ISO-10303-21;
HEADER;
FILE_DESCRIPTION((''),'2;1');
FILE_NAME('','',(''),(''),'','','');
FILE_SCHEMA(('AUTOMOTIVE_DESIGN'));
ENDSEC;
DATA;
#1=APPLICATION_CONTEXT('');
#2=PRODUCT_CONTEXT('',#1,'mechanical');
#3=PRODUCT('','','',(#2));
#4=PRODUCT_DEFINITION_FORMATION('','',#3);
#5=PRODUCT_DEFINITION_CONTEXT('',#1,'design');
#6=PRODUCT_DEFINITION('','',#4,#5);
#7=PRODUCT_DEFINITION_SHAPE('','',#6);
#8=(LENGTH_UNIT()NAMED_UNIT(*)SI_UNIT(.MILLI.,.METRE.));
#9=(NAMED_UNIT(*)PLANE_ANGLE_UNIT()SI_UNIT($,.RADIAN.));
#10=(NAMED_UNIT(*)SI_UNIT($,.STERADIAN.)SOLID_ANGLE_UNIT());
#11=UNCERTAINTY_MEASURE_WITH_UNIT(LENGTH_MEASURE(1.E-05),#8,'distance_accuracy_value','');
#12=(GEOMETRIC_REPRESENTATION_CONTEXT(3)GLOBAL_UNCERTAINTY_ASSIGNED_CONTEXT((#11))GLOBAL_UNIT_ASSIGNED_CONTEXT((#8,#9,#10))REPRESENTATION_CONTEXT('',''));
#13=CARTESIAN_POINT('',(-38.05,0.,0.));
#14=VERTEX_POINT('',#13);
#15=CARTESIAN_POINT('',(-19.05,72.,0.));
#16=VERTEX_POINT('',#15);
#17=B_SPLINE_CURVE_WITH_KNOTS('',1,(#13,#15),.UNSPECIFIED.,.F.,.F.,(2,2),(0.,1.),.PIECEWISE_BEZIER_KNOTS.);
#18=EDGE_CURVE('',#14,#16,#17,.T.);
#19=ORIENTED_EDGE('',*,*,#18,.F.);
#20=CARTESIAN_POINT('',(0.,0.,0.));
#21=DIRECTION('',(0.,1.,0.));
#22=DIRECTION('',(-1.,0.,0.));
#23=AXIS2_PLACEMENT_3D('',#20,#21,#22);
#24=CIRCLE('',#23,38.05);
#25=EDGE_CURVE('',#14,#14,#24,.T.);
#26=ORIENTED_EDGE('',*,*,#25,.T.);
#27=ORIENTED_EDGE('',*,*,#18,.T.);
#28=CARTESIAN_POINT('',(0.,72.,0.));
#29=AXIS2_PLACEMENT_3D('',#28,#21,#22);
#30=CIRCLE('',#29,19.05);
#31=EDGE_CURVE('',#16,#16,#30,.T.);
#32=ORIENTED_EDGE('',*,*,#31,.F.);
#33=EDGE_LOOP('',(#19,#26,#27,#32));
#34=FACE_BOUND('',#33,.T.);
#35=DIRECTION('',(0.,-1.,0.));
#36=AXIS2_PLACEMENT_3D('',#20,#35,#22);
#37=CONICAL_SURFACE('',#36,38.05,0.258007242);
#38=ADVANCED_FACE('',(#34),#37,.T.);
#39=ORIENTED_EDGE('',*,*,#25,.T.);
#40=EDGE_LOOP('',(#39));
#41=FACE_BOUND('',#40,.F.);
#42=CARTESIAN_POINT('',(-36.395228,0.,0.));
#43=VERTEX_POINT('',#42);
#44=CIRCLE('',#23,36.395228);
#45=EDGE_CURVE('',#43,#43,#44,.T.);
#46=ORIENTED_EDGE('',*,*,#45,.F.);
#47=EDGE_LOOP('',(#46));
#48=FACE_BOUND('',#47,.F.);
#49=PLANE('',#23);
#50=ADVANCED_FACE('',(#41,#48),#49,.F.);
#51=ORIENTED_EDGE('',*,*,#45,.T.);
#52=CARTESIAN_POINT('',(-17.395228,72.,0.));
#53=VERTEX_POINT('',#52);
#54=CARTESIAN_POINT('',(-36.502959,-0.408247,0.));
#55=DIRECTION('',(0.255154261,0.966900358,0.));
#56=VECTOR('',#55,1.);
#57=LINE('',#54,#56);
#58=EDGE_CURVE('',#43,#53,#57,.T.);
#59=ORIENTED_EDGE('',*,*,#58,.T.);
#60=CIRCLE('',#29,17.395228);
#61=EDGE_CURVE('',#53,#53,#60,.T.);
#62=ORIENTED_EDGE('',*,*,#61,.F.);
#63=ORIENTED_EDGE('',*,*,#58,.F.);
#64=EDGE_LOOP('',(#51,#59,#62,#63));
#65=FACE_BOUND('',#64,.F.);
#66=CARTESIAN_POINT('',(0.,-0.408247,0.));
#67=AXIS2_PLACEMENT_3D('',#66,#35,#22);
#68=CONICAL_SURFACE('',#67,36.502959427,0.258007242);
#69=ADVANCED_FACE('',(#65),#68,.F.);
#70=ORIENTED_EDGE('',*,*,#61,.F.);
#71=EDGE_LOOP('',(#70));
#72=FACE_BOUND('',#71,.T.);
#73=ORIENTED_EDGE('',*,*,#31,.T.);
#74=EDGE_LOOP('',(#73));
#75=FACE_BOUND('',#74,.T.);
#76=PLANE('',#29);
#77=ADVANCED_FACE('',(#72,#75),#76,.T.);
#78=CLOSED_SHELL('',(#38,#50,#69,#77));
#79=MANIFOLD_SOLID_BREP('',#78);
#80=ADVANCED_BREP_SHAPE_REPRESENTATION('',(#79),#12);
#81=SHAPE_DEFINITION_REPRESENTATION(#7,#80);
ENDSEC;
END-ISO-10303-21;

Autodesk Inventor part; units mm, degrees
ref_plane "YZ Plane" through (0, 0, 0) normal (1, 0, 0) x (0, 1, 0)
ref_plane "XY Plane" through (0, 0, 0) normal (0, 0, 1) x (1, 0, 0)
sketch "Szkic6" plane through (0, 0, 0) normal (0, 1, 0) x (-1, 0, 0)
  circle A0 centre (0, 0) radius 38.05
  dimension "d33" = 76.1
ref_plane "Płaszczyzna konstrukcyjna1" through (0, 72, 0) normal (0, 1, 0) x (-1, 0, 0)
sketch "Szkic7" plane through (0, 72, 0) normal (0, 1, 0) x (-1, 0, 0)
  circle A0 centre (0, 0) radius 19.05
  dimension "d35" = 38.1
loft "Wyciągnięcie złożone1" add profiles "Szkic6", "Szkic7"
shell "Skorupa1" thickness 1.6 removed faces 2 at (5.6226, 72, 0.0883) at (-5.8996, 0, 7.9079)
equation "\"d33\" = OD1"
equation "\"d35\" = OD2"
equation "\"d52\" = THK"
equation "\"SzerokośćGięciaPodcięcia\" = Grubość"
equation "\"RozmiarPodcięciaNarożnika\" = 4 * Grubość"
equation "\"PromieńPrzejścia\" = PromieńGięcia"
equation "\"Rozmiar_promienia_Jacobiego\" = PromieńGięcia"
equation "\"Wielk_odstępu\" = Grubość"
equation "\"d2\" = PromieńGięcia"
equation "\"d23\" = PromieńGięcia"
equation "\"OD1\" = 76.1"
equation "\"OD2\" = 38.1"
equation "\"L\" = 72"
equation "\"THK\" = 1.6"
equation "\"d34\" = L"
equation "\"Grubość\" = 1.5"
equation "\"PromieńGięcia\" = 3"
properties part number "Redukcja symetryczna Ø76,1x38,1x1,6 L=72" material "304"
